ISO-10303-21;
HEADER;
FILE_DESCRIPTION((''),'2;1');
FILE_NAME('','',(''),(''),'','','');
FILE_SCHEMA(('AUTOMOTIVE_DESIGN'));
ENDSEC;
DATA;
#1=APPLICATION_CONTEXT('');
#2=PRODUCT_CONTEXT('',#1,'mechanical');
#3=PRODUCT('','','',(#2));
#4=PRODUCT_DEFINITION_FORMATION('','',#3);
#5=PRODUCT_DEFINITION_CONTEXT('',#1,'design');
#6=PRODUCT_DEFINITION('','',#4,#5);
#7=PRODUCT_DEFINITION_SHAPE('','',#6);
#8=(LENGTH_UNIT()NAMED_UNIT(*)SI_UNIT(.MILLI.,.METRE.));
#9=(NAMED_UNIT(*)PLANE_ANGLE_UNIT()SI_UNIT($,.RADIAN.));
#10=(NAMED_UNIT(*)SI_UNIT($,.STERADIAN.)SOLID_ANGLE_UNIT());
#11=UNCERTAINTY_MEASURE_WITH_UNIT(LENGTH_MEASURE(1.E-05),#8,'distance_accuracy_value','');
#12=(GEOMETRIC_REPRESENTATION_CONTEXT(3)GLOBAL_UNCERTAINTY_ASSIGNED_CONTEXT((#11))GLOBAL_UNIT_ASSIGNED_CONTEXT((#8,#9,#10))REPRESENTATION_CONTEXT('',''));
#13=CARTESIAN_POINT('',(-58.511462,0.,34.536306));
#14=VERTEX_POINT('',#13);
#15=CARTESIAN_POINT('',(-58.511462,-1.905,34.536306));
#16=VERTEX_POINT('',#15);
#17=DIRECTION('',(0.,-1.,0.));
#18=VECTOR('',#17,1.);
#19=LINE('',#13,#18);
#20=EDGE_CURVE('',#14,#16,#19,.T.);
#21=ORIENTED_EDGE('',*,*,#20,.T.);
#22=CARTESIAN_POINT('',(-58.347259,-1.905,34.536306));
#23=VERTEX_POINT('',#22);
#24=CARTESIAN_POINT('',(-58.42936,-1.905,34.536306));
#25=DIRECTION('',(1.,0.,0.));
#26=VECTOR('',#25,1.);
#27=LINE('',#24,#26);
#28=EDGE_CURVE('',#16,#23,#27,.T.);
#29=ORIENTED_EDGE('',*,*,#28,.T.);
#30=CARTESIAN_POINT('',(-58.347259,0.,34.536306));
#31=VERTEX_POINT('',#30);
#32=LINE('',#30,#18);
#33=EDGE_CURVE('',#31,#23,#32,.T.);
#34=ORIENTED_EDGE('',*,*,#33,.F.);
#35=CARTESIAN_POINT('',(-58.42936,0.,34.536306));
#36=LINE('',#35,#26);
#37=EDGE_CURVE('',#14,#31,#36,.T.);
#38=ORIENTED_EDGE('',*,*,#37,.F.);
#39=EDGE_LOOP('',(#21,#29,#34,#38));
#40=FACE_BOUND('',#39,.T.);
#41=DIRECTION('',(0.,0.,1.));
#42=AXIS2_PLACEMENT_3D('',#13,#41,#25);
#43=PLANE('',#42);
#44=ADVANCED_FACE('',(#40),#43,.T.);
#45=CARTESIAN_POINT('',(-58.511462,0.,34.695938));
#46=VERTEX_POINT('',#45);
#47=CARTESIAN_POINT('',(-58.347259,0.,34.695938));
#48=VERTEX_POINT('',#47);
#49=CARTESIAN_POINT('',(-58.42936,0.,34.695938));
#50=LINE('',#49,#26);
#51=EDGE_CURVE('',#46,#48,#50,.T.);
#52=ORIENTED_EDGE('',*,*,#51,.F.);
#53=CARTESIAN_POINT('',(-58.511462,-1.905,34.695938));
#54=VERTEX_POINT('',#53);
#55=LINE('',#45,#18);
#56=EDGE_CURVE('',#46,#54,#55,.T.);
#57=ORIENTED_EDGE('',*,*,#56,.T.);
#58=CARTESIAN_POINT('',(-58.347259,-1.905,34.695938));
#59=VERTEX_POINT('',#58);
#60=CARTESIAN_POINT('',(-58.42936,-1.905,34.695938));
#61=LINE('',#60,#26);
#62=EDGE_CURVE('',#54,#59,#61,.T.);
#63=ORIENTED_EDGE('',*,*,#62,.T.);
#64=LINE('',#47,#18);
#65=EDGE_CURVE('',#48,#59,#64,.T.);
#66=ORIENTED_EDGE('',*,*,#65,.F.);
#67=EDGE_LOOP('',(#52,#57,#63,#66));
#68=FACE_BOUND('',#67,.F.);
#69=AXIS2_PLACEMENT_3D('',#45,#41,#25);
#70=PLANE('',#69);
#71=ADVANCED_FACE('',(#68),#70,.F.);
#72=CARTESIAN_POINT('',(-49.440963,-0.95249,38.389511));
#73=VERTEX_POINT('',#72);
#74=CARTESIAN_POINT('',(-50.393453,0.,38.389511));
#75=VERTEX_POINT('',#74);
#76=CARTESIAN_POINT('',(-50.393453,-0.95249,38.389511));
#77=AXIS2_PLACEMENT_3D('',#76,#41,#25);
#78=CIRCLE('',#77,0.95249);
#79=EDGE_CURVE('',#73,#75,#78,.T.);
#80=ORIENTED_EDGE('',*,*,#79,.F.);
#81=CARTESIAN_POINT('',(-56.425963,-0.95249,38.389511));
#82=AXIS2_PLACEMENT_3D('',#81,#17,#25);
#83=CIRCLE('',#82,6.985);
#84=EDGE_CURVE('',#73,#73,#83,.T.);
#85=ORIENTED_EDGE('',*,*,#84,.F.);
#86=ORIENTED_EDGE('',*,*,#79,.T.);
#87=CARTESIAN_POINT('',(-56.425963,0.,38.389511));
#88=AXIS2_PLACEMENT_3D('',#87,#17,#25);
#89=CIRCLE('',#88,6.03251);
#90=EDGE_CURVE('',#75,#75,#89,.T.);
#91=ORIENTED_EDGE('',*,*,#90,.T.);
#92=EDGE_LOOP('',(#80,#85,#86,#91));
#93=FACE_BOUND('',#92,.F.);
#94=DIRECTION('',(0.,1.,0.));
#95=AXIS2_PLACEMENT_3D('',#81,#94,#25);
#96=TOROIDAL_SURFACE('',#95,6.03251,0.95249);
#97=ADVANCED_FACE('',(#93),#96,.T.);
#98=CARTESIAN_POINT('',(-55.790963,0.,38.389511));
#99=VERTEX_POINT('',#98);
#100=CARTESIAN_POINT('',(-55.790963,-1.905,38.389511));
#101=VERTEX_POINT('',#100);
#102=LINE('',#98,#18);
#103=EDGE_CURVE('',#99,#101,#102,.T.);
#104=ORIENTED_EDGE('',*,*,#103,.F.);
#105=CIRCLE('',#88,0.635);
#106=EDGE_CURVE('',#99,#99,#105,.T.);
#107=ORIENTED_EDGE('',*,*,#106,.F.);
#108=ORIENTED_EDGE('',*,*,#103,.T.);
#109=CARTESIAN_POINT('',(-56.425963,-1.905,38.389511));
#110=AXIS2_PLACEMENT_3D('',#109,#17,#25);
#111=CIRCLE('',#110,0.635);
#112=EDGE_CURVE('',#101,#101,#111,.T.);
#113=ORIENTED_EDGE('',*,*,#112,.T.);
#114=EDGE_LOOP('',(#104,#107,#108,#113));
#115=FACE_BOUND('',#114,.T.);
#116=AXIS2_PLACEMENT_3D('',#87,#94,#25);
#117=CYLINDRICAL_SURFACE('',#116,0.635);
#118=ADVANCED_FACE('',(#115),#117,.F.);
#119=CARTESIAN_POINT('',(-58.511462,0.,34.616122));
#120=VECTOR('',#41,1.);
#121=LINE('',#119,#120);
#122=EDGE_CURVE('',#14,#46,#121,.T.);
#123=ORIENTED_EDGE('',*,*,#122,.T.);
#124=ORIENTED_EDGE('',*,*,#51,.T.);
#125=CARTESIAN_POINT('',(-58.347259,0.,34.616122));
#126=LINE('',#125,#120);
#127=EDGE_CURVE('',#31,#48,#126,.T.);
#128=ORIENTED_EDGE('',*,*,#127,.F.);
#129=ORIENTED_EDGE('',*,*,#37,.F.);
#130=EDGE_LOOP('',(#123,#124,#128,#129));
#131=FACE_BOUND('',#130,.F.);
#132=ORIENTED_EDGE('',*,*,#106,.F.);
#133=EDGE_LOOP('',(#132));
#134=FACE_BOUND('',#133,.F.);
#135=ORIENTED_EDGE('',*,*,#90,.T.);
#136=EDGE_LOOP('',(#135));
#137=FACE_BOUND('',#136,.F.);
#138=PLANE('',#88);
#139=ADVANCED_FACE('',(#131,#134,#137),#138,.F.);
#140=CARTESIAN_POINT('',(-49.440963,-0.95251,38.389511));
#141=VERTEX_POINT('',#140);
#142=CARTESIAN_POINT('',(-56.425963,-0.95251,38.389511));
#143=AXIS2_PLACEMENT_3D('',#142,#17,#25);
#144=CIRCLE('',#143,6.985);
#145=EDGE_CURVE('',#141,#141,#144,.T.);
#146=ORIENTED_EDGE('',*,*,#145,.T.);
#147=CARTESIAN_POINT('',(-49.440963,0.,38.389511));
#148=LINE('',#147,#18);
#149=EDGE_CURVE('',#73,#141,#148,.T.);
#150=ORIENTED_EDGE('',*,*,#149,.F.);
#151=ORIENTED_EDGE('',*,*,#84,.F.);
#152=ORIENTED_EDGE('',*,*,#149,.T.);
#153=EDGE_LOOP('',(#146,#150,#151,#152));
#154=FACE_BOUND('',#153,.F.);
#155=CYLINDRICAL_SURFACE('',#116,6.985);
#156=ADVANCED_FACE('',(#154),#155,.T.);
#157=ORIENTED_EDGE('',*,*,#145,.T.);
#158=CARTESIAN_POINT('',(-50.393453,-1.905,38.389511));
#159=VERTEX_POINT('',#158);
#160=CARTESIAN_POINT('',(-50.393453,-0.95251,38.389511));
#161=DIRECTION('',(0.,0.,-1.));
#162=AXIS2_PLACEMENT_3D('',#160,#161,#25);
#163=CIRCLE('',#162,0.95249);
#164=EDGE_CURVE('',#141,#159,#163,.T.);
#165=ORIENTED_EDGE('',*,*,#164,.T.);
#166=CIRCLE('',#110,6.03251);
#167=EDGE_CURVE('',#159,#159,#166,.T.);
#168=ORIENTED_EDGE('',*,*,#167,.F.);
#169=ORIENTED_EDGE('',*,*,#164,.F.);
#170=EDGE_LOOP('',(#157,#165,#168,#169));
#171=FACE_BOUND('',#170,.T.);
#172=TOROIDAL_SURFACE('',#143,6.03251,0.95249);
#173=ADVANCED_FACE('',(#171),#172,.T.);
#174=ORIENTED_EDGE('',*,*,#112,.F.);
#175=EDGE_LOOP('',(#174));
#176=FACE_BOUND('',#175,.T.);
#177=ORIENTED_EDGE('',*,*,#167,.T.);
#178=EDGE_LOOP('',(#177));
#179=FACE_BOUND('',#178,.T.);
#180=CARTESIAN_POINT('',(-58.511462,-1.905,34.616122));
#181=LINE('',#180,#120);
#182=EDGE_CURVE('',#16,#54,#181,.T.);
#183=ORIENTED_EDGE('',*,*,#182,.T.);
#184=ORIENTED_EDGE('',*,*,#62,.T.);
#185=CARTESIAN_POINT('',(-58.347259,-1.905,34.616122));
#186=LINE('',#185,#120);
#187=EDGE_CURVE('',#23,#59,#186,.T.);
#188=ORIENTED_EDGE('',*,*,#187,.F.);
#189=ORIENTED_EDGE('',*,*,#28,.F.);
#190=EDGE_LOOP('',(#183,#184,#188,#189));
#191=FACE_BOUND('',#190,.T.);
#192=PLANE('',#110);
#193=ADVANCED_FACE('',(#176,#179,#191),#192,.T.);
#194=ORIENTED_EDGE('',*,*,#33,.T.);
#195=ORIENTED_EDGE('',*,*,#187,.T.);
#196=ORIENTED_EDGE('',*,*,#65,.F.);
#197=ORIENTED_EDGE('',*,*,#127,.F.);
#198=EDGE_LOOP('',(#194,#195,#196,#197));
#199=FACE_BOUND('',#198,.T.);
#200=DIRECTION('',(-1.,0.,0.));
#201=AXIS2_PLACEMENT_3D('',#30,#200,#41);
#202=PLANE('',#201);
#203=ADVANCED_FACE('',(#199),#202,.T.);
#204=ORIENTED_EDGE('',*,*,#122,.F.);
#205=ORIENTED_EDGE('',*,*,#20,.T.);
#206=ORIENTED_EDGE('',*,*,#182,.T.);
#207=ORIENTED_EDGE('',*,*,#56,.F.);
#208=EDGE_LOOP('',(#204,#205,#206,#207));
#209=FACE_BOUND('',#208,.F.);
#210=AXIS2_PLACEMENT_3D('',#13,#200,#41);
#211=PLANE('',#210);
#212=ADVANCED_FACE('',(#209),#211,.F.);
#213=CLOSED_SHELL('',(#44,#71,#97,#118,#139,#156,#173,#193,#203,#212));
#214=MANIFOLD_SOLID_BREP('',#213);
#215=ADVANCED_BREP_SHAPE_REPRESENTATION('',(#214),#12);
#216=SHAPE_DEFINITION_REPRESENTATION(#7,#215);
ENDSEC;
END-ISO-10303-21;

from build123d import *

# Parameters (mm, degrees)
F0_R     = 6.985
F0_W     = 0.1642033458
F0_H     = 0.1596324146
F0_R_2   = 0.635
F1_DEPTH = 1.905
F2_R     = 0.95249


# Not quite as in the source:
# - a fillet or chamfer is up to 0.001 mm smaller than in the source, because OpenCascade refuses the exact size


with BuildPart() as f1:
    # F0 (on Front) → F1 (new body)
    with BuildSketch(Plane.XZ):
        with Locations((-56.4259625971, 38.3895114064)):
            Circle(F0_R)
        with Locations((-58.4293603897, 34.6161220223)):
            Rectangle(F0_W, F0_H, mode=Mode.SUBTRACT)
        with Locations((-56.4259625971, 38.3895114064)):
            Circle(F0_R_2, mode=Mode.SUBTRACT)
    extrude(amount=F1_DEPTH)

    # F2 (radius 0.9525 in the source; OpenCascade refuses exactly that, so slightly less here)
    f2_edges = [f1.edges().sort_by_distance(p)[0] for p in [
        (-63.410963, -1.905, 38.389511),
        (-63.410963, 0, 38.389511),
    ]]
    fillet(f2_edges, radius=F2_R)


solid = f1.part
